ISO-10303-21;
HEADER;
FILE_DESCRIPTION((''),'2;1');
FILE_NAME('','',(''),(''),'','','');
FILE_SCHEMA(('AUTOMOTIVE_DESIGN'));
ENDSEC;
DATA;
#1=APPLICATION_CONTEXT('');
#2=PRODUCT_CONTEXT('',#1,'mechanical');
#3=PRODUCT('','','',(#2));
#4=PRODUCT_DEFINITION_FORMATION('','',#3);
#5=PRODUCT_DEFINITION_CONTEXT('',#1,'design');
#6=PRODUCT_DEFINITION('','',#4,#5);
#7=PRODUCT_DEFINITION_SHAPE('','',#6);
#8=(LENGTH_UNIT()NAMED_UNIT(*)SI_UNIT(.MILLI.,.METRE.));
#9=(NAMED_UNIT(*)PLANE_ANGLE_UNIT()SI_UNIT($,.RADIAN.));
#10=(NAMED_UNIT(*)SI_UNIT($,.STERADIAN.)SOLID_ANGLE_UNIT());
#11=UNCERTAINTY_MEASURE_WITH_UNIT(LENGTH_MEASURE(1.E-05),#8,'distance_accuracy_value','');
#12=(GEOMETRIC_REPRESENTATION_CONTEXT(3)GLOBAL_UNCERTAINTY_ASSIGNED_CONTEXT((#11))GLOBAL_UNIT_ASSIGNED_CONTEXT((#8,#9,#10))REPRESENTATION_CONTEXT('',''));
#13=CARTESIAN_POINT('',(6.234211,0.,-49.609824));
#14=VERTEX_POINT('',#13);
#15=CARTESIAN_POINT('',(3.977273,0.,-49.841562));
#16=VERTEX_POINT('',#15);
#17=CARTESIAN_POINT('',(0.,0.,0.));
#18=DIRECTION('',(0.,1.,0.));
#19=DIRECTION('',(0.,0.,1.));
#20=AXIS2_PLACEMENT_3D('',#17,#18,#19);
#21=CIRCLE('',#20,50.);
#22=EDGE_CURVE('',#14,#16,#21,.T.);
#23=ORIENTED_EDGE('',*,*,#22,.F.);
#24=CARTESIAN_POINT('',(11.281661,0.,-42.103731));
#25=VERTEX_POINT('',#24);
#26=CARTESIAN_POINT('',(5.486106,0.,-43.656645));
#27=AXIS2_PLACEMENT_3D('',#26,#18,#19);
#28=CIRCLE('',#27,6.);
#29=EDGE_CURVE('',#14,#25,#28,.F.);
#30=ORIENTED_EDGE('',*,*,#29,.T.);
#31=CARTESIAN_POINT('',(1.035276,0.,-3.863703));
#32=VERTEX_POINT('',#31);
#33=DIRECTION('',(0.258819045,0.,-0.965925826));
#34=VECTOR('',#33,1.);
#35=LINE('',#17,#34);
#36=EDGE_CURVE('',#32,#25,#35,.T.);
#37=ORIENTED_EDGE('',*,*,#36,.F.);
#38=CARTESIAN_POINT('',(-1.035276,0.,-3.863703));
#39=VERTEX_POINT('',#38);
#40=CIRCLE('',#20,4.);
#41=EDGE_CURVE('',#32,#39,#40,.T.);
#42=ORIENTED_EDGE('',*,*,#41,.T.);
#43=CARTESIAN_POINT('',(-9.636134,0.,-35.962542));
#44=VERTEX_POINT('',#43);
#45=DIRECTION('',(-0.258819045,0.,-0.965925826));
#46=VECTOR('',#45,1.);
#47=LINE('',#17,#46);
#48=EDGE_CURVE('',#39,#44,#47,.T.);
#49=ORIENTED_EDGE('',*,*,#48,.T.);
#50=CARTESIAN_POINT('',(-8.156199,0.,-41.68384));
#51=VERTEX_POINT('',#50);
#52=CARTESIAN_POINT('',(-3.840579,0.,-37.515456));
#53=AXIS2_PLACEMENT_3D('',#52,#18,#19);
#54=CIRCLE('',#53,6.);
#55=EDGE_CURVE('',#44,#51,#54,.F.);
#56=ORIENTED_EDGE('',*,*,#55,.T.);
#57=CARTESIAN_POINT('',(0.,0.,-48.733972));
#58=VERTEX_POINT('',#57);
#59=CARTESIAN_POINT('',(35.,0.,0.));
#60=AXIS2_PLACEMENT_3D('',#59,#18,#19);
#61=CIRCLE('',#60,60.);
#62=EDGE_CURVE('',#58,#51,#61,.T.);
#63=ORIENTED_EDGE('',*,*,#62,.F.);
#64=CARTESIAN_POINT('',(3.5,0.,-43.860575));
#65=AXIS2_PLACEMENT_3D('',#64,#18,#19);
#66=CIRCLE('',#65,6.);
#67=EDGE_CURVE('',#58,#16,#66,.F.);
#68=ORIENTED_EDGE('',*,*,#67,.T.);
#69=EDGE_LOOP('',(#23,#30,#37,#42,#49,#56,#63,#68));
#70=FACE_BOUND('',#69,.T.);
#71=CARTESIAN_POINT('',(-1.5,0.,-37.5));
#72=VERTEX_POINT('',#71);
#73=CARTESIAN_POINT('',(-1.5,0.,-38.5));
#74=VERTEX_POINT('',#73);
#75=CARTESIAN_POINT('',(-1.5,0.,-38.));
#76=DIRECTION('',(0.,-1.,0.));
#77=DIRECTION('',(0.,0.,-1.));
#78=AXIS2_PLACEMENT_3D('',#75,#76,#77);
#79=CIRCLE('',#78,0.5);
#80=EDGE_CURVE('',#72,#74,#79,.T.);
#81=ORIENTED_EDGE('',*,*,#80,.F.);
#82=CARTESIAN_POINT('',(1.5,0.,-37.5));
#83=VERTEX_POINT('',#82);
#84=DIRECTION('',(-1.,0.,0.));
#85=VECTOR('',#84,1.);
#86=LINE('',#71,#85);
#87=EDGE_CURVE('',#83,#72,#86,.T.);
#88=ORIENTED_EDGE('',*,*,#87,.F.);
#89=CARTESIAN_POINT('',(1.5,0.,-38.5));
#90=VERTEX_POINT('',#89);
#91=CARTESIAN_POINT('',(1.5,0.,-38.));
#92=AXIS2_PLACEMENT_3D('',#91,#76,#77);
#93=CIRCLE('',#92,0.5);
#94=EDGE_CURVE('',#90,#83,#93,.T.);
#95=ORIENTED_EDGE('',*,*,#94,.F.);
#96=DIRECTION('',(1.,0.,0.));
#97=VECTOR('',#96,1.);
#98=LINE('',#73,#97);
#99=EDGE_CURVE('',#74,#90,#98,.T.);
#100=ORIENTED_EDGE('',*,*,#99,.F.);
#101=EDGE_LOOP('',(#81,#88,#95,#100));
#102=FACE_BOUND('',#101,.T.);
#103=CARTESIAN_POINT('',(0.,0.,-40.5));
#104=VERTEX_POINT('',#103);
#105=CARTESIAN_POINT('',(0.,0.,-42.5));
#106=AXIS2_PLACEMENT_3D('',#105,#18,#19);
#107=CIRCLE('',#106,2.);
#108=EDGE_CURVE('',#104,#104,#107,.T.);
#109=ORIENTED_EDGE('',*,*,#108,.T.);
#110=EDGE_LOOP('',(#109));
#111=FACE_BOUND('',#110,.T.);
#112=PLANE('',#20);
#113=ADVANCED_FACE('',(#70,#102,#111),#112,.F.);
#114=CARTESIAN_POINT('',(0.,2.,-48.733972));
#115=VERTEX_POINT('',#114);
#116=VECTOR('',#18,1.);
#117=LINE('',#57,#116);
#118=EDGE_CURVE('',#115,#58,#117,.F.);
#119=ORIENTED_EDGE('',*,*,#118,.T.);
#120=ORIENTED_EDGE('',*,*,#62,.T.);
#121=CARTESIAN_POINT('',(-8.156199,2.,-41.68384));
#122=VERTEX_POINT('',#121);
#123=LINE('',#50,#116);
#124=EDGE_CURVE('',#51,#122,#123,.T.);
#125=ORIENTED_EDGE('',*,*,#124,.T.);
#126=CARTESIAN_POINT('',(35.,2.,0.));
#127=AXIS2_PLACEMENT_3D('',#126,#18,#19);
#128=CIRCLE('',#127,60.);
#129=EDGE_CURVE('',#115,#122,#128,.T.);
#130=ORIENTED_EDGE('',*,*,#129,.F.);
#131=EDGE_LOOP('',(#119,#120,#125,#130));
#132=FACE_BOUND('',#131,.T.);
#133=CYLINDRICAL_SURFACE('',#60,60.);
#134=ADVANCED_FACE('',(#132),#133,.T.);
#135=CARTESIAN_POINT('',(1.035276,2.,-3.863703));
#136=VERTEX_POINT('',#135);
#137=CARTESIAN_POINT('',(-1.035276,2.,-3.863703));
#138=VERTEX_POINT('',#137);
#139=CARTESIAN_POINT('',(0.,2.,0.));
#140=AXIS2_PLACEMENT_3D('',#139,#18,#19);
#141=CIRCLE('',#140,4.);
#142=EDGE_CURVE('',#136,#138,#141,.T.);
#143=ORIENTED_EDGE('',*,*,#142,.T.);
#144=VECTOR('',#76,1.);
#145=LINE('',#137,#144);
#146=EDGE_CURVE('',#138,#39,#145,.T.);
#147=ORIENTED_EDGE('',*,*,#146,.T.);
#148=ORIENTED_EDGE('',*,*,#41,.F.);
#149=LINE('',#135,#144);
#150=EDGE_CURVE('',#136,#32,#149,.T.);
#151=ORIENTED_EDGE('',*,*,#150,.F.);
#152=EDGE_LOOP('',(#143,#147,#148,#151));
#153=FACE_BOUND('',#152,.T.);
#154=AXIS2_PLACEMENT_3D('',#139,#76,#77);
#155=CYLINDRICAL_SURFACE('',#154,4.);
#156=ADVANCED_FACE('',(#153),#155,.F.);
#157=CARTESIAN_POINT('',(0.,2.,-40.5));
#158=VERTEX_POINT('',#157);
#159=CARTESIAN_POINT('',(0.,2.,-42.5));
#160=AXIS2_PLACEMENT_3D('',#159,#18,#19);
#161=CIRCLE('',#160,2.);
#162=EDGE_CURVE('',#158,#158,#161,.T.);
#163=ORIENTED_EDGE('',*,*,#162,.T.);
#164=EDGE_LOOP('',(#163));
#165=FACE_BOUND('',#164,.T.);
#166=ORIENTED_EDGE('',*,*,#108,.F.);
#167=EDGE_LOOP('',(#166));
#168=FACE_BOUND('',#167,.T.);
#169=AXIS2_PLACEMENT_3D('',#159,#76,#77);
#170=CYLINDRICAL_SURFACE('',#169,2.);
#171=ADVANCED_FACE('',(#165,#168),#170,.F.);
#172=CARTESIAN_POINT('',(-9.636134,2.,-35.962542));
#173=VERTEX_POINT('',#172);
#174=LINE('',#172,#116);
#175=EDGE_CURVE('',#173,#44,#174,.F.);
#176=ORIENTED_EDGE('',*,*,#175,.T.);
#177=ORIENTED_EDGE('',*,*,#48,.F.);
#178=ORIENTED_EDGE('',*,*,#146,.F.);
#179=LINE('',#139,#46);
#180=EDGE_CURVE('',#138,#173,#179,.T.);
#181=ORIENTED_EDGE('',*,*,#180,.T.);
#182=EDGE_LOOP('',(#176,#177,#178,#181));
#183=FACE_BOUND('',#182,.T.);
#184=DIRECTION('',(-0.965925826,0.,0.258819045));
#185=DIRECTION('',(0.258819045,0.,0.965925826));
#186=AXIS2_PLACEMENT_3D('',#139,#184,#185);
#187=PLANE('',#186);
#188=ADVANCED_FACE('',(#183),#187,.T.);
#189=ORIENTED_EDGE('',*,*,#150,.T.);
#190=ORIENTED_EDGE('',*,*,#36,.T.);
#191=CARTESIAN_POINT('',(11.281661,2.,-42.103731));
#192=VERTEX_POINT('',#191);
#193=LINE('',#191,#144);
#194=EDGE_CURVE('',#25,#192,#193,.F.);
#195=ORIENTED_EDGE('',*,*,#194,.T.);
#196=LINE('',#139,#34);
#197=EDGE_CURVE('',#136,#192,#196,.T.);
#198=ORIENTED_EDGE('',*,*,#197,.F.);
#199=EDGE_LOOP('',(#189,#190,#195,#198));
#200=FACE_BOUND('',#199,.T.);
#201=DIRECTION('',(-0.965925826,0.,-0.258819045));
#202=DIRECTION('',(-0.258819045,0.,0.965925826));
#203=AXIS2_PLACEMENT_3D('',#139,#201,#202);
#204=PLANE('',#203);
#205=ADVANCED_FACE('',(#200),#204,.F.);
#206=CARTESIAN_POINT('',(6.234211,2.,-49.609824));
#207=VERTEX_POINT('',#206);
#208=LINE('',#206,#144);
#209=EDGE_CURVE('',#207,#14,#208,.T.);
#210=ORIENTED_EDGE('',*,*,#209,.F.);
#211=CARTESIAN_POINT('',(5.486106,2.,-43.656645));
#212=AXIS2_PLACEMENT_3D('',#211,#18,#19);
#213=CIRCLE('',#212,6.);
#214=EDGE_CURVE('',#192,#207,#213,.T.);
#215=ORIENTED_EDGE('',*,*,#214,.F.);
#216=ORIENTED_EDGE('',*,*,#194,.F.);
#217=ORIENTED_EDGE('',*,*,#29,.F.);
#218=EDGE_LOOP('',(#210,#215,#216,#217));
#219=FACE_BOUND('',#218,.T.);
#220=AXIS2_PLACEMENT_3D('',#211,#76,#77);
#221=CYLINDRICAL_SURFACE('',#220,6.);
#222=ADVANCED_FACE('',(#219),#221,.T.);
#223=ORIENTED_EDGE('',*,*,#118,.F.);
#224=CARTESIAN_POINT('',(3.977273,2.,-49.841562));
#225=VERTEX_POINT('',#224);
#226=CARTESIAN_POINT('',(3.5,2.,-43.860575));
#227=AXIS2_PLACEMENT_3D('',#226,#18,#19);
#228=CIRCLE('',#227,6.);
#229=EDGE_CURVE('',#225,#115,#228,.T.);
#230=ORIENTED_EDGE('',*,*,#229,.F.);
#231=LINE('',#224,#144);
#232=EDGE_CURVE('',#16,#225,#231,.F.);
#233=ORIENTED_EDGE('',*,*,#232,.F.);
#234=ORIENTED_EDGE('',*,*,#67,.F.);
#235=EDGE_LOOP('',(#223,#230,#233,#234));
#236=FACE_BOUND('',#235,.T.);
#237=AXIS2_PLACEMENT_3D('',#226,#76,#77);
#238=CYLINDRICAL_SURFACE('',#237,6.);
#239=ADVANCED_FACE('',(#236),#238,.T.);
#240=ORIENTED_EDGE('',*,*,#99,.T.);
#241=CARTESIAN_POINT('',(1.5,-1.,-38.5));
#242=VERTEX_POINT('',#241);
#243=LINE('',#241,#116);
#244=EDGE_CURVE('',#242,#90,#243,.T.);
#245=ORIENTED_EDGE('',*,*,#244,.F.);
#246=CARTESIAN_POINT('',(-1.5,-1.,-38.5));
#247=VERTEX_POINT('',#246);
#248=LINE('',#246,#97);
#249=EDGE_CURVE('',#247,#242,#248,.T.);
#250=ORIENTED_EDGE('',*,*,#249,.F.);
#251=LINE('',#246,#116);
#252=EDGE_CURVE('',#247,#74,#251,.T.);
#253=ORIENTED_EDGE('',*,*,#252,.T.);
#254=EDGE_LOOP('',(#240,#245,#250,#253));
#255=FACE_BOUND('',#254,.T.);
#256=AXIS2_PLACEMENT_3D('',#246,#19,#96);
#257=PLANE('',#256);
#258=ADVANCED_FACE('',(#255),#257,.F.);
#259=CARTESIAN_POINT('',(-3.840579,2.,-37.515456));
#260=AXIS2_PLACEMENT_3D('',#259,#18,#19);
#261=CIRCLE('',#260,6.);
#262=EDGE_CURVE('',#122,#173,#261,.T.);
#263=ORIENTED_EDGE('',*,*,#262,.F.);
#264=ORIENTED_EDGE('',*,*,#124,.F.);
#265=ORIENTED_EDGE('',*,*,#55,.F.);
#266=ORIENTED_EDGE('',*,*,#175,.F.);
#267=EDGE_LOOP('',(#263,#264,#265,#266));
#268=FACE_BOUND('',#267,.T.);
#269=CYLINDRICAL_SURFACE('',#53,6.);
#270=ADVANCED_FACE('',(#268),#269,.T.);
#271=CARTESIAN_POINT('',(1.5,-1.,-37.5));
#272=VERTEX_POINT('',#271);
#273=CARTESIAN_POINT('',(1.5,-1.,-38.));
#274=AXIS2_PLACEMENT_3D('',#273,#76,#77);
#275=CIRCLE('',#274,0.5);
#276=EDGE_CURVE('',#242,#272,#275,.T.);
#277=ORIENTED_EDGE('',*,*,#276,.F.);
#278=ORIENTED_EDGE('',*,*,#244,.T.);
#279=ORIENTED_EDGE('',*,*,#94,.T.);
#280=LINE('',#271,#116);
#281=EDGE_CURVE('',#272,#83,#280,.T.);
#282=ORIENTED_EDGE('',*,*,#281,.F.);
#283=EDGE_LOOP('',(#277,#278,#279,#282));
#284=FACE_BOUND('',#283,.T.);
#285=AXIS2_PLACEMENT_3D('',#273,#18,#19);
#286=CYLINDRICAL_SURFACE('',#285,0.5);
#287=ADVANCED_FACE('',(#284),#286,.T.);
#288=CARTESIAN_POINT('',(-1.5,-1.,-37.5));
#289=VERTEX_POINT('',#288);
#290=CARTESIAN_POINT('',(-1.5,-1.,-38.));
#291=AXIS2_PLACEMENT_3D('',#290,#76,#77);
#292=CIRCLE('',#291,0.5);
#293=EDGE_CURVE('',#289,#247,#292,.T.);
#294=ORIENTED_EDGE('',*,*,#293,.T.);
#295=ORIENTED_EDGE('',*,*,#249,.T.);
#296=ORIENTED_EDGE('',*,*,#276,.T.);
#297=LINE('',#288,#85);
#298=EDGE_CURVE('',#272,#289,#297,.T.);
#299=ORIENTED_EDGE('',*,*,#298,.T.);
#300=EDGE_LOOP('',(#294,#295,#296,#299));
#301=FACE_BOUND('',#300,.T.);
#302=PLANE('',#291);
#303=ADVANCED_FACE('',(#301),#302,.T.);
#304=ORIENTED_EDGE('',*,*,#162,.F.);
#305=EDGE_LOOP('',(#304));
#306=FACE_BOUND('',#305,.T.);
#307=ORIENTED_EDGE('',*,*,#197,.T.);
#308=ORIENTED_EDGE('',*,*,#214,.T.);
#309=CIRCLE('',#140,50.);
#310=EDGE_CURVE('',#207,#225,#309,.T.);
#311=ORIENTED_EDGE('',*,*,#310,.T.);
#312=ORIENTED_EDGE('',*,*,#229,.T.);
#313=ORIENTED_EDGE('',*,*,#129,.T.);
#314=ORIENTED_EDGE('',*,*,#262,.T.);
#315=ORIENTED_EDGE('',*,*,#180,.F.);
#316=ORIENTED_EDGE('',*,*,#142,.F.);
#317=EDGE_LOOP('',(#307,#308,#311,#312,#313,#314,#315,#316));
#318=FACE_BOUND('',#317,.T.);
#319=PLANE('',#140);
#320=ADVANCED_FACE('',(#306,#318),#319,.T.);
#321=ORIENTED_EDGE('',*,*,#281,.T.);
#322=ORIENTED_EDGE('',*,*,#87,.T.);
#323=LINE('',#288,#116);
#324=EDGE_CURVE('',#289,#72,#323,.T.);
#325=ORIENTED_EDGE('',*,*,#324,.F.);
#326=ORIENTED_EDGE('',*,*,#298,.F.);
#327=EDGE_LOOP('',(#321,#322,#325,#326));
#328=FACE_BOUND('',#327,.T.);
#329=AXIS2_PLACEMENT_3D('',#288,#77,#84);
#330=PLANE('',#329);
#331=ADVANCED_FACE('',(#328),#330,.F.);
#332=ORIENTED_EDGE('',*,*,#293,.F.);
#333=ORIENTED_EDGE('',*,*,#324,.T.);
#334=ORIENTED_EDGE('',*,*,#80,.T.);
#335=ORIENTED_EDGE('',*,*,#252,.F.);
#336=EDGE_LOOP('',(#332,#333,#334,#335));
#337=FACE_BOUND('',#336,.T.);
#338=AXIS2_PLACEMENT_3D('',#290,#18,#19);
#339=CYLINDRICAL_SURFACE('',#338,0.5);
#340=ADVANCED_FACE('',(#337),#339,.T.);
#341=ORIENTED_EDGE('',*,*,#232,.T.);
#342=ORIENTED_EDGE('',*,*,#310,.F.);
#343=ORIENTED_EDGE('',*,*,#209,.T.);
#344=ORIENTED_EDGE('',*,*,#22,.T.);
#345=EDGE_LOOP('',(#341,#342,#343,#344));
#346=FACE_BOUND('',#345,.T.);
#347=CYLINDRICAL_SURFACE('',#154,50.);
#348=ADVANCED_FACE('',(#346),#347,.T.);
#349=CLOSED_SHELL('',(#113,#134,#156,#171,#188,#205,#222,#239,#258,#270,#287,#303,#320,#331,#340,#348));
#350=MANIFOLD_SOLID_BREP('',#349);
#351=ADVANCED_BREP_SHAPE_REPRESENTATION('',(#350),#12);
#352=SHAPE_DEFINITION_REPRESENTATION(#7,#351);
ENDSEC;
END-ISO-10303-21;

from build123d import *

# Parameters (mm, degrees)
SKETCH1_R           = 2
BOSS_EXTRUDE1_DEPTH = 2
CUT_EXTRUDE1_START  = -2
CUT_EXTRUDE1_DEPTH  = 2
FILLET1_R           = 6
BOSS_EXTRUDE2_DEPTH = 1


# Read off the part's stored shape, not the designer's step: Cut-Extrude1
with BuildPart() as part:
    # Sketch1 → Boss-Extrude1 (new body)
    with BuildSketch(Plane(origin=(0, 0, 0), x_dir=(1, 0, 0), z_dir=(0, 1, 0))):
        with BuildLine():
            Line((-1.03527618, 3.863703305), (-12.940952255, 48.296291314))
            ThreePointArc((-12.940952255, 48.296291314), (0, 50), (12.940952255, 48.296291314))
            Line((12.940952255, 48.296291314), (1.03527618, 3.863703305))
            ThreePointArc((1.03527618, 3.863703305), (0, 4), (-1.03527618, 3.863703305))
        make_face()
        with Locations(Location((0, 42.5, 0), (0, 0, 270))):
            Circle(SKETCH1_R, mode=Mode.SUBTRACT)
    extrude(amount=BOSS_EXTRUDE1_DEPTH)

    # Cut-Extrude1 outline → Cut-Extrude1 (cut)
    with BuildSketch(Plane(origin=(0, 2, 0), x_dir=(1, 0, 0), z_dir=(0, 1, 0)).offset(CUT_EXTRUDE1_START)):
        with BuildLine():
            ThreePointArc((-10.484777097, 39.129720832), (-4.720942194, 44.969397941), (1.785714286, 49.96810207))
            ThreePointArc((1.785714286, 49.96810207), (-5.639908806, 49.680896013), (-12.940952255, 48.296291314))
            Line((-12.940952255, 48.296291314), (-10.484777097, 39.129720832))
        make_face()
    extrude(amount=CUT_EXTRUDE1_DEPTH, mode=Mode.SUBTRACT)

    # Fillet1
    fillet1_edges = [part.edges().sort_by_distance(p)[0] for p in [
        (12.940952255, 1, -48.296291314),
        (-10.484777097, 1, -39.129720832),
        (1.785714286, 1, -49.96810207),
    ]]
    fillet(fillet1_edges, radius=FILLET1_R)

    # Sketch4 → Boss-Extrude2 (add)
    with BuildSketch(Plane.XZ):
        with BuildLine():
            Line((-1.5, -37.5), (1.5, -37.5))
            ThreePointArc((1.5, -37.5), (2, -38), (1.5, -38.5))
            Line((1.5, -38.5), (-1.5, -38.5))
            ThreePointArc((-1.5, -38.5), (-2, -38), (-1.5, -37.5))
        make_face()
    extrude(amount=BOSS_EXTRUDE2_DEPTH)


solid = part.part
